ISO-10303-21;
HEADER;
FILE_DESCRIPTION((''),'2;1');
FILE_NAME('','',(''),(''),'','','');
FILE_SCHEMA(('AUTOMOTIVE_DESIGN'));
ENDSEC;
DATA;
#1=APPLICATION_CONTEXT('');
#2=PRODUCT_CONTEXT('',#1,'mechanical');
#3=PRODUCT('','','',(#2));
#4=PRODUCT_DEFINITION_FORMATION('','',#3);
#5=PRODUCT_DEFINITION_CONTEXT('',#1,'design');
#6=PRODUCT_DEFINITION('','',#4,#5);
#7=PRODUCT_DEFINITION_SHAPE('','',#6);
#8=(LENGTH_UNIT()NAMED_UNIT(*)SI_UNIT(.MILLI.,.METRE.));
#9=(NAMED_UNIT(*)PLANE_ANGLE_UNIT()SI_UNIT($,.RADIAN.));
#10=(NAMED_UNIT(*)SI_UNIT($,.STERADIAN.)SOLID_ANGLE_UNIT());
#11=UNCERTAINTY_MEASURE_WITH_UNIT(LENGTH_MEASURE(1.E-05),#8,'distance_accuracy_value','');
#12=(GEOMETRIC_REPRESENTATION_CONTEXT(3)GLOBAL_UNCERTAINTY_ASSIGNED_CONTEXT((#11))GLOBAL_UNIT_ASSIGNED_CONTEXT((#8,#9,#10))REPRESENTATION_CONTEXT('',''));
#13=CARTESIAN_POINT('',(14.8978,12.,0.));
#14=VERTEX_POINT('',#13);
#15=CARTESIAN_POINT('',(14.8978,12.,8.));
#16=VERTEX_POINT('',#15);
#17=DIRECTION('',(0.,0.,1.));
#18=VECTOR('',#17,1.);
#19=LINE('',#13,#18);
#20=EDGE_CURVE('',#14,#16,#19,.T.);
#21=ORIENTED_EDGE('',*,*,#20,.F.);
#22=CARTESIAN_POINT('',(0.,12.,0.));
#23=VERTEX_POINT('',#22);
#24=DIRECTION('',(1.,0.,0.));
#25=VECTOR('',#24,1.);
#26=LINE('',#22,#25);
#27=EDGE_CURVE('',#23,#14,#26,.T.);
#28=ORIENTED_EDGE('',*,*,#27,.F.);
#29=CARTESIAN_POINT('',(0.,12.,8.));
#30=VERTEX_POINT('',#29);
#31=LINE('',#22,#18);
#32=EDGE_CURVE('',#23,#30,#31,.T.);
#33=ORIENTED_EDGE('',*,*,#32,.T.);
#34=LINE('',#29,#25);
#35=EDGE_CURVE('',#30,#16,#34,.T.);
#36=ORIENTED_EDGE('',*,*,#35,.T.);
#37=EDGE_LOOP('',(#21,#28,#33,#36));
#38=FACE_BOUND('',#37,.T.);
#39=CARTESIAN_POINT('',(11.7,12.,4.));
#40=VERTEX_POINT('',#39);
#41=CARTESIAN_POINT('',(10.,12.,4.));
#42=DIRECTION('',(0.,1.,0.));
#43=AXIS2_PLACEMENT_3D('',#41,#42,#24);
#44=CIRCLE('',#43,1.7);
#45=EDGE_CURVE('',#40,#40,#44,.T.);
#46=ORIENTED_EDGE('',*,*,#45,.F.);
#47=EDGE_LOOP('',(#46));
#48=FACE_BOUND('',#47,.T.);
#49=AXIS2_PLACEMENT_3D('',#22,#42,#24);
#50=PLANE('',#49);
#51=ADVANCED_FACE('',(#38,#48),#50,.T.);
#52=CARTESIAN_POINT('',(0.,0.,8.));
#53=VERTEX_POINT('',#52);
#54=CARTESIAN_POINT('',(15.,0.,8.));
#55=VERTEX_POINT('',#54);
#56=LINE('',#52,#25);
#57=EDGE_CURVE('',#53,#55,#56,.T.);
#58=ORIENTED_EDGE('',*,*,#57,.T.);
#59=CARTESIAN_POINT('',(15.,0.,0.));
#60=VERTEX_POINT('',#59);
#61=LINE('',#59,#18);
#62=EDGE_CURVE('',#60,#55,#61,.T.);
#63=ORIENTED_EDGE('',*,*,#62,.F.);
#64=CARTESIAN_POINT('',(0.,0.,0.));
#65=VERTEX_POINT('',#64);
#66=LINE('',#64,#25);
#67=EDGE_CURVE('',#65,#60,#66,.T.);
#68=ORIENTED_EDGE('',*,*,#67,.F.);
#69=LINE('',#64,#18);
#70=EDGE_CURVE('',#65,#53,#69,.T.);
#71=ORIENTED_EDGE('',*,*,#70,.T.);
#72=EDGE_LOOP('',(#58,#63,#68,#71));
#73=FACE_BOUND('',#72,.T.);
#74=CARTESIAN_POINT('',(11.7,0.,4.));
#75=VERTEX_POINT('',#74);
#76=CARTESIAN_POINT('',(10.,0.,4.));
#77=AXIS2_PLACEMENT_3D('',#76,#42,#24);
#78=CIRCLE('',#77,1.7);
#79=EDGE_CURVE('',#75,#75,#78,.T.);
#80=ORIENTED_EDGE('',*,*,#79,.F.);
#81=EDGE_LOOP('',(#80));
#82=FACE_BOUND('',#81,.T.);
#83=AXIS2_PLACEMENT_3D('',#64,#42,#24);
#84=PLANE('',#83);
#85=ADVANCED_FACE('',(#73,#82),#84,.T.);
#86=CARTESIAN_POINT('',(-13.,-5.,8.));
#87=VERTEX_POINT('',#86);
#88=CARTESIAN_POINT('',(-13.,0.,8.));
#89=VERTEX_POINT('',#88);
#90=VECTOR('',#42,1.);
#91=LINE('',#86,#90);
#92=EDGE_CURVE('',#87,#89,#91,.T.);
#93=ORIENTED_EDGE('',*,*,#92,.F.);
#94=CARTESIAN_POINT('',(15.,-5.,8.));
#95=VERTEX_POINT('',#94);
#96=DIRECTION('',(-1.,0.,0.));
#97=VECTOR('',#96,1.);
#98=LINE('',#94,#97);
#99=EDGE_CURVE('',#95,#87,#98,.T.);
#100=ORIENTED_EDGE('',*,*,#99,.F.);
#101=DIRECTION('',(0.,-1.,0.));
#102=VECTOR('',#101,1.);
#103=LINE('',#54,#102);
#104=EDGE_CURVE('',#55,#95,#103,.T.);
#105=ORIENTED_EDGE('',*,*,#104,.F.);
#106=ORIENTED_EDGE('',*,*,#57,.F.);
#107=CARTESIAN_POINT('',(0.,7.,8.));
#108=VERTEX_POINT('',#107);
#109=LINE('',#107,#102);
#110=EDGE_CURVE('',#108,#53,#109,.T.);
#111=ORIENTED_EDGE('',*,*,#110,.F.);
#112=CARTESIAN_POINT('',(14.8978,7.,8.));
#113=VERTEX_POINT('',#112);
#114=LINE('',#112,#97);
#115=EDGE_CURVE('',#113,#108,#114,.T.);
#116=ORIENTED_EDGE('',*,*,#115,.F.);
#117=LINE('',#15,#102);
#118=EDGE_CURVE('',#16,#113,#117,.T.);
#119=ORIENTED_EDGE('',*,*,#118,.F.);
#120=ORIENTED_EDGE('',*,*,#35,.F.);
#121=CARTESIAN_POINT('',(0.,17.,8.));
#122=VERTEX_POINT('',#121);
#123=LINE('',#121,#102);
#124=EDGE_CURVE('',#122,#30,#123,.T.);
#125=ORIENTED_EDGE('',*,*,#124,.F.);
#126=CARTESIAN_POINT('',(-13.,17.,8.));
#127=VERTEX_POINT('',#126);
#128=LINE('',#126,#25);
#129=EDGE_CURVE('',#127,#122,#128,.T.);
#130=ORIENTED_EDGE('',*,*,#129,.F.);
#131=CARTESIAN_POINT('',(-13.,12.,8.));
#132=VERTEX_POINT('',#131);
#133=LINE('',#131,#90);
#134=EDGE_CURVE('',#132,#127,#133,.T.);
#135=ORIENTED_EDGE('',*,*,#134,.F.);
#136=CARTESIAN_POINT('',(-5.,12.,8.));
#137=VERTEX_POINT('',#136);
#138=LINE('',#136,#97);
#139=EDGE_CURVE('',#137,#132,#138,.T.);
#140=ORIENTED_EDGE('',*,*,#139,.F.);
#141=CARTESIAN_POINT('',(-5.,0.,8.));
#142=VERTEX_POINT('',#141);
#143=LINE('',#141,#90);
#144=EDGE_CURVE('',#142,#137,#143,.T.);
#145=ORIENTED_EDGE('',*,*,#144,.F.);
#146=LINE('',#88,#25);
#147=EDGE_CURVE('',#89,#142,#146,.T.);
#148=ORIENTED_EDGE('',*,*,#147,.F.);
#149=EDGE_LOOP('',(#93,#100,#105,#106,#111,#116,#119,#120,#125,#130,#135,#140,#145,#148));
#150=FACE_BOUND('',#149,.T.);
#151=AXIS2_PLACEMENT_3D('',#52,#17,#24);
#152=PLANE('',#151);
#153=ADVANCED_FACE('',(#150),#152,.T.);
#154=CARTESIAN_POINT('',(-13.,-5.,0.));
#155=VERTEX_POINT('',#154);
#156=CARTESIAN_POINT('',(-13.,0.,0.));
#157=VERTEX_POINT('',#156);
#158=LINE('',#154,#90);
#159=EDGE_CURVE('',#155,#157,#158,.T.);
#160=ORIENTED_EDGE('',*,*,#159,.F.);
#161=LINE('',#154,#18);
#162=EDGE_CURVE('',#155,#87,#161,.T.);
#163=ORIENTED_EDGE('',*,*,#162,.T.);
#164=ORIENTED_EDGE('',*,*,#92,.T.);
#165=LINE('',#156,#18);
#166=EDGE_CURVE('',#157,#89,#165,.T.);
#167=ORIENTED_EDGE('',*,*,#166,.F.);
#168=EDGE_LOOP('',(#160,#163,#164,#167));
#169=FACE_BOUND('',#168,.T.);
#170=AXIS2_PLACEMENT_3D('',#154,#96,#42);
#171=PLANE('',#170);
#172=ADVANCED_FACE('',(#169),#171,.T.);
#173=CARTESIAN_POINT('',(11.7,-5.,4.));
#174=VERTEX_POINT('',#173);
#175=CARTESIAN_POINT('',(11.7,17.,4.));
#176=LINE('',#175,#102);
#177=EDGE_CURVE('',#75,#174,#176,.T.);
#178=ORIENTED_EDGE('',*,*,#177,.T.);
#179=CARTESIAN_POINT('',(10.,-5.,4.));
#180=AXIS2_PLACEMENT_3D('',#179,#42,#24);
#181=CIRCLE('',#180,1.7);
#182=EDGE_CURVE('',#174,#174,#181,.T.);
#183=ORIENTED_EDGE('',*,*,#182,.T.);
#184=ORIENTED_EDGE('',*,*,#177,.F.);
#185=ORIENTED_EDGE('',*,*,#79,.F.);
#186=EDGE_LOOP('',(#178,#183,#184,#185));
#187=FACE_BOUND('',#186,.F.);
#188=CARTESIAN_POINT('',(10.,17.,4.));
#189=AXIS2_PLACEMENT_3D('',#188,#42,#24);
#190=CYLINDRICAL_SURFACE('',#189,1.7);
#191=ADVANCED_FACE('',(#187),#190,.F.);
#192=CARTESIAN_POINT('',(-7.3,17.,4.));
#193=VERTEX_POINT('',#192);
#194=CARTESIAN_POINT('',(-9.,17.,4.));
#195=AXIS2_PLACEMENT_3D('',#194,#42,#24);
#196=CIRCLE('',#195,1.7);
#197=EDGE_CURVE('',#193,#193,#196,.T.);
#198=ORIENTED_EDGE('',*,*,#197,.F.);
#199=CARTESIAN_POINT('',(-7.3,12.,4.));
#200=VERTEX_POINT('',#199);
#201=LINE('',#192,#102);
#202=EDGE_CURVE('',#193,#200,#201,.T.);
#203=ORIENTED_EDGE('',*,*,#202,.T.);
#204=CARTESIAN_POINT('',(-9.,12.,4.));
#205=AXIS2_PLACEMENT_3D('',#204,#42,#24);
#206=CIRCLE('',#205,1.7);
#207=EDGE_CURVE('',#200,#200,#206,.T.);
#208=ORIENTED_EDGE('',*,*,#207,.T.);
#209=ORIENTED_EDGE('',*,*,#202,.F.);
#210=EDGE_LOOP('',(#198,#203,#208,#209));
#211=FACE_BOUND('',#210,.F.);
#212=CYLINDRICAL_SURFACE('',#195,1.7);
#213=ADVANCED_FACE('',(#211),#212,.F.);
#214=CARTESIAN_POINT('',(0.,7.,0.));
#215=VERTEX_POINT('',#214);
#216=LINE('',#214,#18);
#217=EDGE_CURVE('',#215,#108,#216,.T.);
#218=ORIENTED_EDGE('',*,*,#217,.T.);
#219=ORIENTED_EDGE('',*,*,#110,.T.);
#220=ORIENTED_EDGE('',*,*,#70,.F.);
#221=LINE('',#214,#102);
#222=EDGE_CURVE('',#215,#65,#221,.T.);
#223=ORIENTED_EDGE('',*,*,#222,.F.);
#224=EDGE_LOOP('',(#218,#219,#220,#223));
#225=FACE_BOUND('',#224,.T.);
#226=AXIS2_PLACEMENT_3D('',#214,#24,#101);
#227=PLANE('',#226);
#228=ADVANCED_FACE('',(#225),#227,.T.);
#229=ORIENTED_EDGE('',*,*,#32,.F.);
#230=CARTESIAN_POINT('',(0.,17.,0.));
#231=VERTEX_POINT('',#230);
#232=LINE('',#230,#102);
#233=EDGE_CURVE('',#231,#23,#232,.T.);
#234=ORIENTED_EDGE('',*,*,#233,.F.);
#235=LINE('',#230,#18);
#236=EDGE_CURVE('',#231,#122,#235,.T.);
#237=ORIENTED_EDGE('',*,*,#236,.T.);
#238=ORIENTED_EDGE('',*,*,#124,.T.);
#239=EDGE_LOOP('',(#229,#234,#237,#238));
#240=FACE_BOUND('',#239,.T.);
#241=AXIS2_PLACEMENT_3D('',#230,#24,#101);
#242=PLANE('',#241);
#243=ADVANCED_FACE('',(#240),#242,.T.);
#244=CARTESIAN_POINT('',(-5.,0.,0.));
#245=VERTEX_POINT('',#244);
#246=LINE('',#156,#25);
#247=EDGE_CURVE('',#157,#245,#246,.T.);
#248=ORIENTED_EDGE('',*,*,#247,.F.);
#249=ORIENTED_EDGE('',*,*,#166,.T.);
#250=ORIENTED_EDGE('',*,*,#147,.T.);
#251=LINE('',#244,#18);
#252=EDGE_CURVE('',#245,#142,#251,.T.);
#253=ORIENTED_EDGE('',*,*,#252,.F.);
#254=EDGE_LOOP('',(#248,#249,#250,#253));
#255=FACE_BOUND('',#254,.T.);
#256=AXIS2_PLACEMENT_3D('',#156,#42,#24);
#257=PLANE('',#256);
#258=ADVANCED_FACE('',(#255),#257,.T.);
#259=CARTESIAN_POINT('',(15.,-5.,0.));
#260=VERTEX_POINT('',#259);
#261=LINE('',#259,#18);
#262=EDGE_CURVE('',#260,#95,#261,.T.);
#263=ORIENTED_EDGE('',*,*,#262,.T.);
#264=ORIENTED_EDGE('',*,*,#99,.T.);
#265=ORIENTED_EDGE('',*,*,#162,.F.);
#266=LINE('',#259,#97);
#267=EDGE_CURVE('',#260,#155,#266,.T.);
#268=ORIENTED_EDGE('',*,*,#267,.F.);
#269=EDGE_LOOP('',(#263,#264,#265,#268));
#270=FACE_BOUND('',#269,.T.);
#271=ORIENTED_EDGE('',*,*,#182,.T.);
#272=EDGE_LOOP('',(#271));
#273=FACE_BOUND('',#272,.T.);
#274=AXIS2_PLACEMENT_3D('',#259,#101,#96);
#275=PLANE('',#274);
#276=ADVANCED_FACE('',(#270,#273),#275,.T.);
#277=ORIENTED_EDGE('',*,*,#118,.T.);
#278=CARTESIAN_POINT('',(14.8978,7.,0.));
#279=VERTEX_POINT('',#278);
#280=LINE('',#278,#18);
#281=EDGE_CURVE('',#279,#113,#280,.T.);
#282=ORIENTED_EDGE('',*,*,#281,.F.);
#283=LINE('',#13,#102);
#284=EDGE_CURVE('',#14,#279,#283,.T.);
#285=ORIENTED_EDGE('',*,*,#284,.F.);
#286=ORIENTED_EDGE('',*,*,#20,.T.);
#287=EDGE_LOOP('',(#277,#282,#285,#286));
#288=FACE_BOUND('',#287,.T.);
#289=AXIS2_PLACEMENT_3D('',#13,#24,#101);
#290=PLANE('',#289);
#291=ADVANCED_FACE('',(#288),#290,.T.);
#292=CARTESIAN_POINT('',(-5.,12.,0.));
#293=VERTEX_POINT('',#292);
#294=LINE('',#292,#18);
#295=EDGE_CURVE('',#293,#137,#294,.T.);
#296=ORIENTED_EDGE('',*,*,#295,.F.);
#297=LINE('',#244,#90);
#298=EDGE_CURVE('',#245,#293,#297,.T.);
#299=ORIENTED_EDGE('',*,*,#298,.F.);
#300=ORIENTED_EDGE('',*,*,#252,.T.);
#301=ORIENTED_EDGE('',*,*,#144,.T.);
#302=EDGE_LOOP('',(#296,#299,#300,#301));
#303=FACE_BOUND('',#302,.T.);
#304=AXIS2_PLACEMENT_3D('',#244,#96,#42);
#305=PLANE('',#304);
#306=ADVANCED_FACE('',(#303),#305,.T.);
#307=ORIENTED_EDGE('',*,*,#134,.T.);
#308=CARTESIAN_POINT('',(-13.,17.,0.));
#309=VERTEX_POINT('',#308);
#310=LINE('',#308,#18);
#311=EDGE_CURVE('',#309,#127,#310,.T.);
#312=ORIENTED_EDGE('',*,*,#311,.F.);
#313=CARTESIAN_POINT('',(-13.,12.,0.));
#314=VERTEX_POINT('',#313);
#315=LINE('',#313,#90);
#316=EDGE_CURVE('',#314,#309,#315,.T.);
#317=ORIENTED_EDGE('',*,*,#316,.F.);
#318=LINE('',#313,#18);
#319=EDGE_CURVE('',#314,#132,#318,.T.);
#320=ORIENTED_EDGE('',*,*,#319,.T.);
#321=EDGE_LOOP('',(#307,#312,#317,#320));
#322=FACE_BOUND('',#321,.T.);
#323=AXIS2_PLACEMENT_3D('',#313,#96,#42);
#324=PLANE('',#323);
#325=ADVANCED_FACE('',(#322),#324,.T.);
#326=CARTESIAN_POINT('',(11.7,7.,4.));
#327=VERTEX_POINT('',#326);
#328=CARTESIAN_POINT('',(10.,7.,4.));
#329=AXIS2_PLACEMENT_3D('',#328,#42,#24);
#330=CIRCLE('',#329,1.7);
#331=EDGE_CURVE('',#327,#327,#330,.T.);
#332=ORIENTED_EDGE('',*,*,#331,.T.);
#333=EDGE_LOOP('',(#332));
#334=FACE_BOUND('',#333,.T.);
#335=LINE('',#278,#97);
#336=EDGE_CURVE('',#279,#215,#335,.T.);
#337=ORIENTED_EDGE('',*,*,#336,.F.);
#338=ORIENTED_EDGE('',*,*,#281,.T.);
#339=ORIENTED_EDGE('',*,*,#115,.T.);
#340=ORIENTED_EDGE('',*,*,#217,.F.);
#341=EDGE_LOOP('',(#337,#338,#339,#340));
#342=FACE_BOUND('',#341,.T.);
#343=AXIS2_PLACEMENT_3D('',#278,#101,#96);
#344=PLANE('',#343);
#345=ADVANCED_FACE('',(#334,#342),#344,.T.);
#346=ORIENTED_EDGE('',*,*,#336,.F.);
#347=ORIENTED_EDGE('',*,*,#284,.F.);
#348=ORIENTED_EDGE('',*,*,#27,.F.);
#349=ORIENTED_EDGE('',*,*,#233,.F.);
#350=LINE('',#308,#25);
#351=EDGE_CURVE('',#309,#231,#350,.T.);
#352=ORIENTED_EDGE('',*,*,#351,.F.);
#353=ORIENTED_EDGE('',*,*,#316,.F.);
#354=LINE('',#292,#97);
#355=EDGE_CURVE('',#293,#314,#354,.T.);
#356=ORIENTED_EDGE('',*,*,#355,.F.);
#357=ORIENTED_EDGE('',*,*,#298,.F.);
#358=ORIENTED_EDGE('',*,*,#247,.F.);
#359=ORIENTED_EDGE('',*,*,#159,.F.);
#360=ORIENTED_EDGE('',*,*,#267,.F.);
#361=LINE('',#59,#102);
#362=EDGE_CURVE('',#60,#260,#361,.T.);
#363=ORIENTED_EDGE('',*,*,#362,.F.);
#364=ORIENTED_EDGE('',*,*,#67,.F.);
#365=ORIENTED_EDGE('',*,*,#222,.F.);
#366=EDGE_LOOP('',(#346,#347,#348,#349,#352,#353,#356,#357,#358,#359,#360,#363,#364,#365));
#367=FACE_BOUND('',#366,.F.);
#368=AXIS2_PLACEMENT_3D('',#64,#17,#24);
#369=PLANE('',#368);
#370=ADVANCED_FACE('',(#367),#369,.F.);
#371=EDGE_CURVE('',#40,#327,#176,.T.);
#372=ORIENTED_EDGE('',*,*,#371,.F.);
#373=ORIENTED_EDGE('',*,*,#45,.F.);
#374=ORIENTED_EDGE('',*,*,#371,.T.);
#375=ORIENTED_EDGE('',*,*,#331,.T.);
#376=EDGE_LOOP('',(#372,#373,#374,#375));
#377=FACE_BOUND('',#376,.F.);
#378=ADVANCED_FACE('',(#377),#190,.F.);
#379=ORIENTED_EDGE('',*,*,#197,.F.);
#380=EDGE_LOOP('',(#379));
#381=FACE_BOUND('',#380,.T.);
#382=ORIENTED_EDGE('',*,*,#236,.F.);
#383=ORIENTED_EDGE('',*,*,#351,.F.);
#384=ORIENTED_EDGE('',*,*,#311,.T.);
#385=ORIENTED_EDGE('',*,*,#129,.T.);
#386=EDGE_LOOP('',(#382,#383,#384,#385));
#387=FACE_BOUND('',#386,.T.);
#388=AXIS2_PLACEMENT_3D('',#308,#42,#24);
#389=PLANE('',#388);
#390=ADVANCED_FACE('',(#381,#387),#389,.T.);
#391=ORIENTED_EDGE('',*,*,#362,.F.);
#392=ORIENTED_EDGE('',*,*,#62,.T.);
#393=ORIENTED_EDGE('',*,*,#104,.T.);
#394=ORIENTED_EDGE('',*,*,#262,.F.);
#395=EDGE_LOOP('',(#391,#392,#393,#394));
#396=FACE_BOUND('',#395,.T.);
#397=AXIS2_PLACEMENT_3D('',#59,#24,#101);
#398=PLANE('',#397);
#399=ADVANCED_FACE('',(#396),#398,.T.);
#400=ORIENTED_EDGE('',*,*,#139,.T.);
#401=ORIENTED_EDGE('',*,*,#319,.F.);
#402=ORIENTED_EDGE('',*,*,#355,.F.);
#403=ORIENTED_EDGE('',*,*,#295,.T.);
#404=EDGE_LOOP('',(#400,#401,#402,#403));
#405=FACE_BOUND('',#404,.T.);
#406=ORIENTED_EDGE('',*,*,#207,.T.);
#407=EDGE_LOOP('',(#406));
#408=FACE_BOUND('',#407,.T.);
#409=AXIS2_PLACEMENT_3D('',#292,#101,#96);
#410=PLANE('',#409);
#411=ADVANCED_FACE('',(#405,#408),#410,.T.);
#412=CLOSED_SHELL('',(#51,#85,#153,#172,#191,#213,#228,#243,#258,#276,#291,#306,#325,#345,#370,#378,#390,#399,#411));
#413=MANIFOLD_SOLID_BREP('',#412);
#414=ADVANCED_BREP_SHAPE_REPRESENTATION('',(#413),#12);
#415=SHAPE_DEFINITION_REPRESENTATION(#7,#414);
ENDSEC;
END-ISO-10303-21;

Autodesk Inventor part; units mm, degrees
ref_plane "YZ Plane" through (0, 0, 0) normal (1, 0, 0) x (0, 1, 0)
ref_plane "XZ Plane" through (0, 0, 0) normal (0, 1, 0) x (-1, 0, 0)
ref_plane "XY Plane" through (0, 0, 0) normal (0, 0, 1) x (1, 0, 0)
sketch "Sketch1" plane through (0, 0, 0) normal (0, 0, 1) x (1, 0, 0)
  line L0 (0, 0) -> (15, 0)
  line L1 (15, 0) -> (15, -5)
  line L2 (15, -5) -> (-13, -5)
  line L3 (-13, -5) -> (-13, 0)
  line L4 (-13, 0) -> (-5, 0)
  line L5 (-5, 0) -> (-5, 12)
  line L6 (-5, 12) -> (-13, 12)
  line L7 (-13, 12) -> (-13, 17)
  line L8 (14.8978, 12) -> (14.8978, 7)
  line L9 (14.8978, 7) -> (0, 7)
  line L10 (0, 7) -> (0, 0)
  line L11 (-13, 17) -> (0, 17)
  line L12 (0, 17) -> (0, 12)
  line L13 (0, 12) -> (14.8978, 12)
  dimension "d0" = 15
  dimension "d1" = 5
  dimension "d2" = 28
  dimension "d3" = 5
  dimension "d4" = 8
  dimension "d5" = 12
  dimension "d6" = 8
  dimension "d7" = 5
  dimension "d9" = 5
  dimension "d19" = 5
extrude "Extrusion1" add sketch "Sketch1" along normal blind 8
sketch "Sketch3" plane through (-13, 17, 0) normal (0, 1, 0) x (1, 0, 0)
  line L0 (0, 0) -> (0, -8) projected
  line L1 (13, 0) -> (13, -8) projected
  circle A0 centre (23, -4) radius 1.7
  circle A1 centre (4, -4) radius 1.7
  point P0 (13, -4)
  point P1 (13, -4)
  dimension "d20" = 3.4
  dimension "d21" = 3.4
  dimension "d22" = 4
  dimension "d23" = 10
extrude "Extrusion3" cut sketch "Sketch3" against normal blind 30
delete faces "Delete Face1" heal yes whole lump no faces at (-7.322, -3.3333, 4.2727)
properties part number "Pulley vice"
